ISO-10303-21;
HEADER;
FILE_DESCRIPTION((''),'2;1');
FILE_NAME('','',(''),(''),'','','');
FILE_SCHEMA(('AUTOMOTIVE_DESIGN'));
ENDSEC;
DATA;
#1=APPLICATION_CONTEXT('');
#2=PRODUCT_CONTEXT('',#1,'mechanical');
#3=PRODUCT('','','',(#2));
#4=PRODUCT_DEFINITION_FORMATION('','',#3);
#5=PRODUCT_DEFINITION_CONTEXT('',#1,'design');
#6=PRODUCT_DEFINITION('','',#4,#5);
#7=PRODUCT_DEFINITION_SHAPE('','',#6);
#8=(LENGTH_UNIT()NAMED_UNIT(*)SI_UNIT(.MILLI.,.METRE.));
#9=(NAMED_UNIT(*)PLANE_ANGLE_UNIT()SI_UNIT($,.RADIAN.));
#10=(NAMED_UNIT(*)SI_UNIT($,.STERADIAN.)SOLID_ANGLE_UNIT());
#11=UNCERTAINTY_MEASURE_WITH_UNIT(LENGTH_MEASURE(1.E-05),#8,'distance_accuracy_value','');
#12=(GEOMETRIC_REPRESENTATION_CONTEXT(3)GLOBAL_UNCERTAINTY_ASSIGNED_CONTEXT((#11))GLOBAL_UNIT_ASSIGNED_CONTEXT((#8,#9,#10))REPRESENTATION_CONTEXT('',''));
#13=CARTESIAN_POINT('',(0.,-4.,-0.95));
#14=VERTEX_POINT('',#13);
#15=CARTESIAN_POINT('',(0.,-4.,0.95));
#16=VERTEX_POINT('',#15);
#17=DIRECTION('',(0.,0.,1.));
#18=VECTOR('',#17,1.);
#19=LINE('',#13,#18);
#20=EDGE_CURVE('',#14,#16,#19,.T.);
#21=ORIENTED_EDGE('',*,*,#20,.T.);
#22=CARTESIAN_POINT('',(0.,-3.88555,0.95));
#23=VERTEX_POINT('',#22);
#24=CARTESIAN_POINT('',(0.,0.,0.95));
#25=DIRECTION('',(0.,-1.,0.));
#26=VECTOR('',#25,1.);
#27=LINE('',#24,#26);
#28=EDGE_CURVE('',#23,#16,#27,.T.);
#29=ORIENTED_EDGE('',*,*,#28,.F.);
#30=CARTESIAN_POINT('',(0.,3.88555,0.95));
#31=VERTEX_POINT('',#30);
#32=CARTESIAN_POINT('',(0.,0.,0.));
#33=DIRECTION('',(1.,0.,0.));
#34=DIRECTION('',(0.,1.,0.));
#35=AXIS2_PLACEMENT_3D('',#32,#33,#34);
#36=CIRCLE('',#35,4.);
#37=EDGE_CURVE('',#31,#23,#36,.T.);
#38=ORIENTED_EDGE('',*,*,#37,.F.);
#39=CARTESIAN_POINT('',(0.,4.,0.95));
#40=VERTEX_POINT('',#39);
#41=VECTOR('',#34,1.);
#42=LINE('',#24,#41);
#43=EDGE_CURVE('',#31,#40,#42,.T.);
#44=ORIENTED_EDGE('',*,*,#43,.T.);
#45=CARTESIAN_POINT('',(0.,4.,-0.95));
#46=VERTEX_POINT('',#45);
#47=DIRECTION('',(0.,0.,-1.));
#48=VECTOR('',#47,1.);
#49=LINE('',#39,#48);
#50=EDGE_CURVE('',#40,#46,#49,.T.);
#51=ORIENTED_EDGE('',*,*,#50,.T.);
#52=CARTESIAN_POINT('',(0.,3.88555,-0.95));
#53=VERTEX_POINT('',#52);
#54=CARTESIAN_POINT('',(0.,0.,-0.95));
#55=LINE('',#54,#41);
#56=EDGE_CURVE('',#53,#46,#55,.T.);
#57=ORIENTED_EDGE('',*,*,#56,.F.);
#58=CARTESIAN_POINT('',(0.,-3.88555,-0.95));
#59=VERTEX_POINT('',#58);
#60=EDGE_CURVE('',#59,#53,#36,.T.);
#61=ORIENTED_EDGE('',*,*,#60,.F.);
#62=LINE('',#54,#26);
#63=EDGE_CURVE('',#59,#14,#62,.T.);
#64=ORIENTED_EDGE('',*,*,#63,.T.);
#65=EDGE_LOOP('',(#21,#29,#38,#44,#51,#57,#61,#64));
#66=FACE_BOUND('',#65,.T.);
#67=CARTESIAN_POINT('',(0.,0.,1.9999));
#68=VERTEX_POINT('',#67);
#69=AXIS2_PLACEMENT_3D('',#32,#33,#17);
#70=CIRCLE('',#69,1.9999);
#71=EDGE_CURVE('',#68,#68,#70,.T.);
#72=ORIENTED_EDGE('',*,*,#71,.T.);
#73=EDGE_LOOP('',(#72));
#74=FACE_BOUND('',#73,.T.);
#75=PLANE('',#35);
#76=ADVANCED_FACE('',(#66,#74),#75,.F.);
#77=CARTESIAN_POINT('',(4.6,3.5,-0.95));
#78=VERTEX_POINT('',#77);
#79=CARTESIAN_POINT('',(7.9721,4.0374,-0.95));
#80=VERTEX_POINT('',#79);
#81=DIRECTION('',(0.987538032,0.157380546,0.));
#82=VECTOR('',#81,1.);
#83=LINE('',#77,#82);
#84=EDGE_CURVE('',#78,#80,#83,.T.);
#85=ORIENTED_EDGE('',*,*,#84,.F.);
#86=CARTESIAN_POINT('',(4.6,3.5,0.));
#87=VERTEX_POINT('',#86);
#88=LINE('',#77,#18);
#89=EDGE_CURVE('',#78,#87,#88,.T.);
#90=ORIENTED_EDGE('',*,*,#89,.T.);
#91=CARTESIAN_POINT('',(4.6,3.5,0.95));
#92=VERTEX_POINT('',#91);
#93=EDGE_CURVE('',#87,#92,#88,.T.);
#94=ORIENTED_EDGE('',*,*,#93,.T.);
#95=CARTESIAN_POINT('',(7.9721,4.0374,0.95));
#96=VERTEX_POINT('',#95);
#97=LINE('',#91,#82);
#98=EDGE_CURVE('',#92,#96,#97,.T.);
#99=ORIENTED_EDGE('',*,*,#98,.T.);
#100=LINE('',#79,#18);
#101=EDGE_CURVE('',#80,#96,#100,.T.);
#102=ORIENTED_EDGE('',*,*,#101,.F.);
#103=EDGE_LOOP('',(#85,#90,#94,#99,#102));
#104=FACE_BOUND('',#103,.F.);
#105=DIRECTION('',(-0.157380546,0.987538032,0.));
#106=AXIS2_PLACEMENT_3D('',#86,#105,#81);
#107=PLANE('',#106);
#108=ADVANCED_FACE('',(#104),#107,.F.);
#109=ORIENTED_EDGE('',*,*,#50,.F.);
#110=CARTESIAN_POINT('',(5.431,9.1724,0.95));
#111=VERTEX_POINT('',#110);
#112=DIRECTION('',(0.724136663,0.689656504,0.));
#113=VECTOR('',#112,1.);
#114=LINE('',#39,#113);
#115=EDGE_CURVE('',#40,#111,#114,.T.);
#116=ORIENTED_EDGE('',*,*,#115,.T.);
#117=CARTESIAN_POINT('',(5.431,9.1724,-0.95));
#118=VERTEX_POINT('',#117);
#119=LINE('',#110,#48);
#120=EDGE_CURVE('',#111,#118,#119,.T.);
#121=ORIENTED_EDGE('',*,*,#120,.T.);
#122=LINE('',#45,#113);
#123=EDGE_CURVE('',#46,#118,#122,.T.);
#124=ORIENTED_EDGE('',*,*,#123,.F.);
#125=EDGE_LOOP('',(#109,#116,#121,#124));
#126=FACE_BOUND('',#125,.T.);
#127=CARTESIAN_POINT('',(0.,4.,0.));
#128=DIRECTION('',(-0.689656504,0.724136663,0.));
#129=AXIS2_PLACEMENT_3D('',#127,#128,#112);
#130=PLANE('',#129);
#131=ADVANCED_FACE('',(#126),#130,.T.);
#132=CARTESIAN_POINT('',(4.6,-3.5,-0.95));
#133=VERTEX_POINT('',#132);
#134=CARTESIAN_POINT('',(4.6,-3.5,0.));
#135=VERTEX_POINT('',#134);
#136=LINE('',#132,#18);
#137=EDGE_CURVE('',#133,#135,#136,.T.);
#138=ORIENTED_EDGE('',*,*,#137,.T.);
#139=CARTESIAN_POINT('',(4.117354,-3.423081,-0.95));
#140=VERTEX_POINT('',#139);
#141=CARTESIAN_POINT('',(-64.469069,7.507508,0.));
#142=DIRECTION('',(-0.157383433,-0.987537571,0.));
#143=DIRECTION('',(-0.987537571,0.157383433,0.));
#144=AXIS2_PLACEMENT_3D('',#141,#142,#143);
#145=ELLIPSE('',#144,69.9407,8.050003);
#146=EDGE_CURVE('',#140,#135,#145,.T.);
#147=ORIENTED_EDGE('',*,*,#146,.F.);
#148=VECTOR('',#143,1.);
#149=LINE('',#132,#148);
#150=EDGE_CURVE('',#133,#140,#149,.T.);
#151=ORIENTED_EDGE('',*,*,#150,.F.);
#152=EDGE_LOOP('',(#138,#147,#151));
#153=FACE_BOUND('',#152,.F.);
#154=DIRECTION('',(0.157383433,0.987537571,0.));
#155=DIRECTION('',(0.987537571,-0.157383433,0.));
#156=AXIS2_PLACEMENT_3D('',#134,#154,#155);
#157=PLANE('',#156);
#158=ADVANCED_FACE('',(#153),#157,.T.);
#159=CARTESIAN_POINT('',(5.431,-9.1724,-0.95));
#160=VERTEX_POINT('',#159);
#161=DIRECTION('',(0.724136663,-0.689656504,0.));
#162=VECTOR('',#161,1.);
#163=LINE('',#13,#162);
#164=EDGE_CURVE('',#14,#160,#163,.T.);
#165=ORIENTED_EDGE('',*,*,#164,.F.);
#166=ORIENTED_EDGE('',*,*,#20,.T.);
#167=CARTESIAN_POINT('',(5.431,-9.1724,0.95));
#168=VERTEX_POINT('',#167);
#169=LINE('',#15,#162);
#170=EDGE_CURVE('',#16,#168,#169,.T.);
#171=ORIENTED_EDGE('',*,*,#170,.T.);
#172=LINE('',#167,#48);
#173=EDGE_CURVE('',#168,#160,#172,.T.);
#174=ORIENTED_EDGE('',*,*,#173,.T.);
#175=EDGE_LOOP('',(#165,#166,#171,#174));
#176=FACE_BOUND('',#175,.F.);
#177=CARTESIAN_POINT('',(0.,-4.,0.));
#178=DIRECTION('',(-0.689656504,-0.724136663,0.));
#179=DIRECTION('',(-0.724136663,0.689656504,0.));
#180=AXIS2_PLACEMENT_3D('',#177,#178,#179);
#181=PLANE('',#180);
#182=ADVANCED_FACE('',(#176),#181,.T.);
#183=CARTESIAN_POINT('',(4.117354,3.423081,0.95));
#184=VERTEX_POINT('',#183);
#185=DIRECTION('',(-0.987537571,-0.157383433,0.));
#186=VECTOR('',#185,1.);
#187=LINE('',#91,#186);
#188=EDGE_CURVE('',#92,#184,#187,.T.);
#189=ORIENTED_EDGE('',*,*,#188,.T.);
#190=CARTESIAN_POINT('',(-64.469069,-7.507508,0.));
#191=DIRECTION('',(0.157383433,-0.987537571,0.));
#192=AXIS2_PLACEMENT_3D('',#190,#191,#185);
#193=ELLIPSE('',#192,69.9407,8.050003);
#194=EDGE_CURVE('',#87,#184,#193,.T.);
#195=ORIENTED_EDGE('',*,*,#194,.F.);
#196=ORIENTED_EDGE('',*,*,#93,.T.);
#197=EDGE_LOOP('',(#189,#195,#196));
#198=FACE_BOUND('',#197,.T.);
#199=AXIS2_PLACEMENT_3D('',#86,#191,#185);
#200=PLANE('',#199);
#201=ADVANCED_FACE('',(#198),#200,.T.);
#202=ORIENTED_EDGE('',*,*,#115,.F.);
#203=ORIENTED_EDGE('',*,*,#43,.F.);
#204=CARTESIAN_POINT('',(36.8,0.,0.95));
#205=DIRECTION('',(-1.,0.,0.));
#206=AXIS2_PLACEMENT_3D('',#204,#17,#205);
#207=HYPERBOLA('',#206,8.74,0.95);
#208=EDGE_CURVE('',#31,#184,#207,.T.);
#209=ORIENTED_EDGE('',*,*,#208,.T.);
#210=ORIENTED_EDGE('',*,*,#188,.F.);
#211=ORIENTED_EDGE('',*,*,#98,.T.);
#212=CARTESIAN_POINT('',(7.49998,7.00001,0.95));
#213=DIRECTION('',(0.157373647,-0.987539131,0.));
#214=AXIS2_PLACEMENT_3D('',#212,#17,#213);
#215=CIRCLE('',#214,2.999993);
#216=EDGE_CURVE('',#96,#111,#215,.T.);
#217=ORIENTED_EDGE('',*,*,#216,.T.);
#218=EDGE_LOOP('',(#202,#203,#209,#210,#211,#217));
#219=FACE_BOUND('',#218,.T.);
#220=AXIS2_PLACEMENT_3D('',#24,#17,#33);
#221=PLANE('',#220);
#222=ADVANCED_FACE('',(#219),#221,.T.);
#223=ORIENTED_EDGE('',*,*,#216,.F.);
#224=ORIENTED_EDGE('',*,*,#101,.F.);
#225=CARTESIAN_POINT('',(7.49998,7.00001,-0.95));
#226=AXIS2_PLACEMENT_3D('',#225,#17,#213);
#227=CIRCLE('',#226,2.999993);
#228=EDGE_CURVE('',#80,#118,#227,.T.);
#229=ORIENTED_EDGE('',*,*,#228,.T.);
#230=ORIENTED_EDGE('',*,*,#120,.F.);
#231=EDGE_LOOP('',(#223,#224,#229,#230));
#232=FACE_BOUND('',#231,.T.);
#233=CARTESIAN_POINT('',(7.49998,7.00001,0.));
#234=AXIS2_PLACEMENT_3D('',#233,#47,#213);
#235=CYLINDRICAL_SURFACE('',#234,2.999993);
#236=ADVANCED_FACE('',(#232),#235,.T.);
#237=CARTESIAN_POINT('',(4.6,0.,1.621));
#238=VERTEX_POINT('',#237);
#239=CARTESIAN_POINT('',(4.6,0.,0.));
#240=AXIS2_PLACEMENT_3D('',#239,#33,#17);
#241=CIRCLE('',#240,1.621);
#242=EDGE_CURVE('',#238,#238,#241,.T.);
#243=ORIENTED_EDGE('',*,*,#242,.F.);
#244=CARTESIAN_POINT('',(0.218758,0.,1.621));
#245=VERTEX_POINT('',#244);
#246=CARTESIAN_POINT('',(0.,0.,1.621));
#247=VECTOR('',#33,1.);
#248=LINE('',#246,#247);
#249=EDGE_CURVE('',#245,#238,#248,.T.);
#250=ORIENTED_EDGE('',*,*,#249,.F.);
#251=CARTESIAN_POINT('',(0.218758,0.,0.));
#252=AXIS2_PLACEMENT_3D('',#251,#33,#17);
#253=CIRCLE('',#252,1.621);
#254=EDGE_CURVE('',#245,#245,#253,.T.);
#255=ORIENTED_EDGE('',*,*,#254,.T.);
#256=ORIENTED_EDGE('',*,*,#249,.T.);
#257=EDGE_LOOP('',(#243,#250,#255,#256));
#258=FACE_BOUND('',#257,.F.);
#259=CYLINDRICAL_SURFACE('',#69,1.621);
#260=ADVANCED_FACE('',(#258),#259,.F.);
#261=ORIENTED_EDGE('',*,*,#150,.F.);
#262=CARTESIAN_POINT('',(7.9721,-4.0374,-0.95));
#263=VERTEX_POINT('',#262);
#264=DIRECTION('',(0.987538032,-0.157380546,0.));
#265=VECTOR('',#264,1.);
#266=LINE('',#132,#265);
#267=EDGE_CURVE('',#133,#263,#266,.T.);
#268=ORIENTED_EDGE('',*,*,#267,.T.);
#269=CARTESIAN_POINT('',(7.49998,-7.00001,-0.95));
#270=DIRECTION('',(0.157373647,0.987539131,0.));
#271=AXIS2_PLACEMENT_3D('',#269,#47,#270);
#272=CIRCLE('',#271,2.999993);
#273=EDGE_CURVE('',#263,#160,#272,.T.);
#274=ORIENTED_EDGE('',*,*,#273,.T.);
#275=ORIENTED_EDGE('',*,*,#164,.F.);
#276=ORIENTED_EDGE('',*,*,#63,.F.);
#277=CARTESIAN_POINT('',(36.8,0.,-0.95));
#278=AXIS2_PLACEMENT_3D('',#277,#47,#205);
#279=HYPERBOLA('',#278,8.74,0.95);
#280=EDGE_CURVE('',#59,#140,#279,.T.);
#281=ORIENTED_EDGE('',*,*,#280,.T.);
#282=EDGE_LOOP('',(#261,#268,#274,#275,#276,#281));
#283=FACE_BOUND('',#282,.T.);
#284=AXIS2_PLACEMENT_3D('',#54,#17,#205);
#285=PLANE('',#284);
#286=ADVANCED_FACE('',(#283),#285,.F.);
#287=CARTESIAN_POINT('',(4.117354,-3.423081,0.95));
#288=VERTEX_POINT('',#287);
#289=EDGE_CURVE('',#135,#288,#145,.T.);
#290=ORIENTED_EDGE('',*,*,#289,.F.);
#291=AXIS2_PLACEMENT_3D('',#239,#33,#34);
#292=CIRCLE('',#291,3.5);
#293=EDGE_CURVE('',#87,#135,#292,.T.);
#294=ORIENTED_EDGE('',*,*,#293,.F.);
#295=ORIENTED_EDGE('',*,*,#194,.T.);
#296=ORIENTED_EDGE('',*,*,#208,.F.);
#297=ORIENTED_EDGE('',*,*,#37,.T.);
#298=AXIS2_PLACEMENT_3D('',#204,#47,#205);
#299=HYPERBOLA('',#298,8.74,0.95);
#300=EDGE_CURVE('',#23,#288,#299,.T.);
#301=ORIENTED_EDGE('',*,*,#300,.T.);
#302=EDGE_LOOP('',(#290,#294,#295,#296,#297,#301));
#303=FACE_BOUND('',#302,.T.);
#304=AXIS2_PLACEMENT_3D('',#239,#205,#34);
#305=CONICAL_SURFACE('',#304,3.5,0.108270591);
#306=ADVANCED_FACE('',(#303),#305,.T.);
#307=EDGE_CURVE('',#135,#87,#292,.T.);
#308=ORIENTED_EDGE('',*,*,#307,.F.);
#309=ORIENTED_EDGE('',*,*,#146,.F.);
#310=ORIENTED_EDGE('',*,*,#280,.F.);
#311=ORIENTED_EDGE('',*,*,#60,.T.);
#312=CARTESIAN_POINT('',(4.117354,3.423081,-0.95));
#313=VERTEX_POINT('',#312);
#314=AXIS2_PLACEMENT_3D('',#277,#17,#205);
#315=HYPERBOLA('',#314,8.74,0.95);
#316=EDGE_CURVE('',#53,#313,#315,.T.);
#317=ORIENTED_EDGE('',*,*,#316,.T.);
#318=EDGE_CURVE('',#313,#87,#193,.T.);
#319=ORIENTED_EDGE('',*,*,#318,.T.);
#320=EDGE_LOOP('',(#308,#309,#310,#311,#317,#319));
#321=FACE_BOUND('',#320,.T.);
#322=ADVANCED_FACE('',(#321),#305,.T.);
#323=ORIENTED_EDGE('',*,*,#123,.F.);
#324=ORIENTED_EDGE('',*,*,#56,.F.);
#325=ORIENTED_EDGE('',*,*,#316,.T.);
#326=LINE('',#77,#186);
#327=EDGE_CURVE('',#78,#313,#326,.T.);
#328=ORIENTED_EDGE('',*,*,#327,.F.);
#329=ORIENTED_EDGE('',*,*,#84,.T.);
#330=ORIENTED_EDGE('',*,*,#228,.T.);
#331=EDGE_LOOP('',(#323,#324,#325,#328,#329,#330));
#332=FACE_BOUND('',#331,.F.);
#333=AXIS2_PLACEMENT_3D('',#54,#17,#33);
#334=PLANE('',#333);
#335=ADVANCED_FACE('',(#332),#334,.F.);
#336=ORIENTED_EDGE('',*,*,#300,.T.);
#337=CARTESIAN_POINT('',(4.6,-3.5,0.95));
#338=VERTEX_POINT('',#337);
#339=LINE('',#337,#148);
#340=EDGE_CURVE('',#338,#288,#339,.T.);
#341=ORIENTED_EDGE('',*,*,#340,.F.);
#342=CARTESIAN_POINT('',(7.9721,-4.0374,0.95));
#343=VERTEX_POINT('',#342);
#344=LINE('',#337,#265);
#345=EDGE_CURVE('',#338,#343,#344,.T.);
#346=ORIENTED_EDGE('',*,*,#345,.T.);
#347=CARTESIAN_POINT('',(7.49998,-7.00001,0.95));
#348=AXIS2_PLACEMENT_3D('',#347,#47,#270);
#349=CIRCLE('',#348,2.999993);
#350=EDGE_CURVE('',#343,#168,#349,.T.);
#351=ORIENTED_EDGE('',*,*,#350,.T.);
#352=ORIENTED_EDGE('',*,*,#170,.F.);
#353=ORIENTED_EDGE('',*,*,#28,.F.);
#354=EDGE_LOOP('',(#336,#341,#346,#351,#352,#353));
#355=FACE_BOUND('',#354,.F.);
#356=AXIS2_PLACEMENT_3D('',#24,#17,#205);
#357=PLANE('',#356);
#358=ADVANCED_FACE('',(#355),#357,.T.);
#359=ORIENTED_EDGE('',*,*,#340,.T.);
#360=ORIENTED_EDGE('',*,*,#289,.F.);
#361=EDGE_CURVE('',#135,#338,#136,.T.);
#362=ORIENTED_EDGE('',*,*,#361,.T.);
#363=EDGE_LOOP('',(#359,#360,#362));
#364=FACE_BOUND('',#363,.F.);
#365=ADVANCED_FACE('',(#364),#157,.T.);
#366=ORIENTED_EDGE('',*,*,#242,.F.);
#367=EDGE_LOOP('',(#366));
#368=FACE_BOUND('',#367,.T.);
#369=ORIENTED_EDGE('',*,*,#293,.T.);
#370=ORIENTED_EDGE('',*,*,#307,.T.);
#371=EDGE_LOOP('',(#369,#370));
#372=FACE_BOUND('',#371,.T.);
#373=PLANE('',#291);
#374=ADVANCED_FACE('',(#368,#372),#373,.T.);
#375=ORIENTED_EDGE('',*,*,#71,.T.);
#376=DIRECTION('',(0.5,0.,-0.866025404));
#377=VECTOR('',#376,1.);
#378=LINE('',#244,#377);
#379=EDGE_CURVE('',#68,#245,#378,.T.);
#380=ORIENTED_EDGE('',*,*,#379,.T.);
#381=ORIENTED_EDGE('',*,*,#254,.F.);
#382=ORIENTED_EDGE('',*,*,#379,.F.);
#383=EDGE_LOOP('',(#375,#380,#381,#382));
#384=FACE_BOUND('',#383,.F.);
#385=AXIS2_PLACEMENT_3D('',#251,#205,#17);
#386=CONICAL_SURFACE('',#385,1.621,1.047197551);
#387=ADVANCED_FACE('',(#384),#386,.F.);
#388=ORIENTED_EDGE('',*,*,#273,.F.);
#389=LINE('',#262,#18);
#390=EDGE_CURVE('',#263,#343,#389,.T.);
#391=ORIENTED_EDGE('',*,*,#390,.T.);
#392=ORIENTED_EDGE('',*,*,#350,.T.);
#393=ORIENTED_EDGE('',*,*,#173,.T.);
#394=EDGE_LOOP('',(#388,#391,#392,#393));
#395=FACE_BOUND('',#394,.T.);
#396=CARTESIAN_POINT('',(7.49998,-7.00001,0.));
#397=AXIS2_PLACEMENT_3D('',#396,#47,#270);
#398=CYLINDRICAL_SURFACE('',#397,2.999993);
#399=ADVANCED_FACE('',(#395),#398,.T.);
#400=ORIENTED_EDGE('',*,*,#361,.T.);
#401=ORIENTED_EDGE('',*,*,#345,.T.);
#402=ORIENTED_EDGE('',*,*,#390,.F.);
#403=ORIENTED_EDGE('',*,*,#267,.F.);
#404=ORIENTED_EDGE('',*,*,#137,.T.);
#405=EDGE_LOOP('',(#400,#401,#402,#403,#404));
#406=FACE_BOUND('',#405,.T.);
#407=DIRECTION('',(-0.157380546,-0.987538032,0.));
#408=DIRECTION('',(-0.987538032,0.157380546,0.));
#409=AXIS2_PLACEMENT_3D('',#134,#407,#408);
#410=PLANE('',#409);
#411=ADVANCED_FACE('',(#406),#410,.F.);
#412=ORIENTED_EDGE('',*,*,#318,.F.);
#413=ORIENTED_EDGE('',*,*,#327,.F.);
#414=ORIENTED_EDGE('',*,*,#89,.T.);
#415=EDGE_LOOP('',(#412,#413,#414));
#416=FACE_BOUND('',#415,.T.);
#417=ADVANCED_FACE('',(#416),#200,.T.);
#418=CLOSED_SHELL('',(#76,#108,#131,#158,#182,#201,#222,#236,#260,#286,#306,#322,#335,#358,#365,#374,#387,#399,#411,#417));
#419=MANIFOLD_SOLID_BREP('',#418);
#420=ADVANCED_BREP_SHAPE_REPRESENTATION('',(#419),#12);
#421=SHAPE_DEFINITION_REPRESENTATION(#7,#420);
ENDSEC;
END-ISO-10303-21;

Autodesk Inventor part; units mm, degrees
ref_plane "YZ Plane" through (0, 0, 0) normal (1, 0, 0) x (0, 1, 0)
ref_plane "XZ Plane" through (0, 0, 0) normal (0, 1, 0) x (-1, 0, 0)
sketch "Sketch1" plane through (0, 0, 0) normal (0, 0, 1) x (1, 0, 0)
  line L0 (0, 0) -> (4.6, 0)
  line L1 (0, 0) -> (0, 4)
  line L2 (4.6, 3.5) -> (4.6, 0)
  line L3 (0, 4) -> (5.431, 9.1724)
  line L4 (4.6, 3.5) -> (7.9721, 4.0374)
  arc A0 (7.9721, 4.0374) -> (5.431, 9.1724) centre (7.5, 7) ccw
  line L5 (4.6, 3.5) -> (0, 4)
  line L6 (4.6, 3.5) -> (0, 2.7669)
  dimension "d0" = 7
  dimension "d1" = 7.5
  dimension "d2" = 7
  dimension "d3" = 3
  dimension "d4" = 4.6
  dimension "d5" = 8
revolve "Body" add sketch "Sketch1" angle 360 about axis through (0, 0, 0) along (1, 0, 0) contours L1 L6 L2 L0 | L1 L5 L6
extrude "Wing1" add sketch "Sketch1" along normal mid plane 1.9 contours L1 L5 L6 | L5 L3 A0 L4
fillet "Fillet1" [suppressed]
mirror "Wing2" about plane through (0, 0, 0) normal (0, 1, 0) of "Wing1"
sketch "Sketch2" plane through (0, 0, 0) normal (1, 0, 0) x (0, 1, 0)
  line L0 (0, -14) -> (0, 14) projected
  line L1 (-14, 0) -> (14, 0) projected
  point P0 (0, 0)
hole "Thread" at (0, 0, 0) direction (1, 0, 0) diameter 3.242 end through all thread size "M4x0.7" class "6H" standard "ISO Metric profile"
chamfer "Chamfer1" distance 0.3789 angle 30 1 edges at (0, 0, -1.621) measured on face at (0, -3.1268, -0.0651)
ref_plane "Work Plane1" through (23.9635, 0, 0) normal (0, 0, -1) x (1, 0, 0)
equation "\"d0\" = KOD2"
equation "\"d1\" = KOH1 - RR"
equation "\"d2\" = 0.5 * E0 - RR"
equation "\"d3\" = RR"
equation "\"d4\" = KOH"
equation "\"d5\" = KOD"
equation "\"d6\" = SW"
equation "\"d8\" = 0.333333 * SW"
equation "\"d9\" = -0.5 * GD1 + 0.5 * NND"
equation "\"d109\" = -0.5 * GD1 + 0.5 * NND"
equation "\"NND\" = 4"
equation "\"KOH\" = 4.6"
equation "\"KOH1\" = 10.5"
equation "\"SW\" = 1.9"
equation "\"KOD\" = 8"
equation "\"KOD2\" = 7"
equation "\"RR\" = 3"
equation "\"GUL\" = 0.541266 * PTC"
equation "\"BOR\" = 0"
equation "\"PTC\" = 0.7"
equation "\"THREADDIA\" = 4"
equation "\"TOA\" = 30deg"
equation "\"RR2\" = 2"
equation "\"SW1\" = 2.3"
equation "\"GAL\" = 0.541266 * PTC"
equation "\"E0\" = 20"
equation "\"GD1\" = 3.242228"
properties part number "DIN 315 - M4" material "Steel, Mild"
